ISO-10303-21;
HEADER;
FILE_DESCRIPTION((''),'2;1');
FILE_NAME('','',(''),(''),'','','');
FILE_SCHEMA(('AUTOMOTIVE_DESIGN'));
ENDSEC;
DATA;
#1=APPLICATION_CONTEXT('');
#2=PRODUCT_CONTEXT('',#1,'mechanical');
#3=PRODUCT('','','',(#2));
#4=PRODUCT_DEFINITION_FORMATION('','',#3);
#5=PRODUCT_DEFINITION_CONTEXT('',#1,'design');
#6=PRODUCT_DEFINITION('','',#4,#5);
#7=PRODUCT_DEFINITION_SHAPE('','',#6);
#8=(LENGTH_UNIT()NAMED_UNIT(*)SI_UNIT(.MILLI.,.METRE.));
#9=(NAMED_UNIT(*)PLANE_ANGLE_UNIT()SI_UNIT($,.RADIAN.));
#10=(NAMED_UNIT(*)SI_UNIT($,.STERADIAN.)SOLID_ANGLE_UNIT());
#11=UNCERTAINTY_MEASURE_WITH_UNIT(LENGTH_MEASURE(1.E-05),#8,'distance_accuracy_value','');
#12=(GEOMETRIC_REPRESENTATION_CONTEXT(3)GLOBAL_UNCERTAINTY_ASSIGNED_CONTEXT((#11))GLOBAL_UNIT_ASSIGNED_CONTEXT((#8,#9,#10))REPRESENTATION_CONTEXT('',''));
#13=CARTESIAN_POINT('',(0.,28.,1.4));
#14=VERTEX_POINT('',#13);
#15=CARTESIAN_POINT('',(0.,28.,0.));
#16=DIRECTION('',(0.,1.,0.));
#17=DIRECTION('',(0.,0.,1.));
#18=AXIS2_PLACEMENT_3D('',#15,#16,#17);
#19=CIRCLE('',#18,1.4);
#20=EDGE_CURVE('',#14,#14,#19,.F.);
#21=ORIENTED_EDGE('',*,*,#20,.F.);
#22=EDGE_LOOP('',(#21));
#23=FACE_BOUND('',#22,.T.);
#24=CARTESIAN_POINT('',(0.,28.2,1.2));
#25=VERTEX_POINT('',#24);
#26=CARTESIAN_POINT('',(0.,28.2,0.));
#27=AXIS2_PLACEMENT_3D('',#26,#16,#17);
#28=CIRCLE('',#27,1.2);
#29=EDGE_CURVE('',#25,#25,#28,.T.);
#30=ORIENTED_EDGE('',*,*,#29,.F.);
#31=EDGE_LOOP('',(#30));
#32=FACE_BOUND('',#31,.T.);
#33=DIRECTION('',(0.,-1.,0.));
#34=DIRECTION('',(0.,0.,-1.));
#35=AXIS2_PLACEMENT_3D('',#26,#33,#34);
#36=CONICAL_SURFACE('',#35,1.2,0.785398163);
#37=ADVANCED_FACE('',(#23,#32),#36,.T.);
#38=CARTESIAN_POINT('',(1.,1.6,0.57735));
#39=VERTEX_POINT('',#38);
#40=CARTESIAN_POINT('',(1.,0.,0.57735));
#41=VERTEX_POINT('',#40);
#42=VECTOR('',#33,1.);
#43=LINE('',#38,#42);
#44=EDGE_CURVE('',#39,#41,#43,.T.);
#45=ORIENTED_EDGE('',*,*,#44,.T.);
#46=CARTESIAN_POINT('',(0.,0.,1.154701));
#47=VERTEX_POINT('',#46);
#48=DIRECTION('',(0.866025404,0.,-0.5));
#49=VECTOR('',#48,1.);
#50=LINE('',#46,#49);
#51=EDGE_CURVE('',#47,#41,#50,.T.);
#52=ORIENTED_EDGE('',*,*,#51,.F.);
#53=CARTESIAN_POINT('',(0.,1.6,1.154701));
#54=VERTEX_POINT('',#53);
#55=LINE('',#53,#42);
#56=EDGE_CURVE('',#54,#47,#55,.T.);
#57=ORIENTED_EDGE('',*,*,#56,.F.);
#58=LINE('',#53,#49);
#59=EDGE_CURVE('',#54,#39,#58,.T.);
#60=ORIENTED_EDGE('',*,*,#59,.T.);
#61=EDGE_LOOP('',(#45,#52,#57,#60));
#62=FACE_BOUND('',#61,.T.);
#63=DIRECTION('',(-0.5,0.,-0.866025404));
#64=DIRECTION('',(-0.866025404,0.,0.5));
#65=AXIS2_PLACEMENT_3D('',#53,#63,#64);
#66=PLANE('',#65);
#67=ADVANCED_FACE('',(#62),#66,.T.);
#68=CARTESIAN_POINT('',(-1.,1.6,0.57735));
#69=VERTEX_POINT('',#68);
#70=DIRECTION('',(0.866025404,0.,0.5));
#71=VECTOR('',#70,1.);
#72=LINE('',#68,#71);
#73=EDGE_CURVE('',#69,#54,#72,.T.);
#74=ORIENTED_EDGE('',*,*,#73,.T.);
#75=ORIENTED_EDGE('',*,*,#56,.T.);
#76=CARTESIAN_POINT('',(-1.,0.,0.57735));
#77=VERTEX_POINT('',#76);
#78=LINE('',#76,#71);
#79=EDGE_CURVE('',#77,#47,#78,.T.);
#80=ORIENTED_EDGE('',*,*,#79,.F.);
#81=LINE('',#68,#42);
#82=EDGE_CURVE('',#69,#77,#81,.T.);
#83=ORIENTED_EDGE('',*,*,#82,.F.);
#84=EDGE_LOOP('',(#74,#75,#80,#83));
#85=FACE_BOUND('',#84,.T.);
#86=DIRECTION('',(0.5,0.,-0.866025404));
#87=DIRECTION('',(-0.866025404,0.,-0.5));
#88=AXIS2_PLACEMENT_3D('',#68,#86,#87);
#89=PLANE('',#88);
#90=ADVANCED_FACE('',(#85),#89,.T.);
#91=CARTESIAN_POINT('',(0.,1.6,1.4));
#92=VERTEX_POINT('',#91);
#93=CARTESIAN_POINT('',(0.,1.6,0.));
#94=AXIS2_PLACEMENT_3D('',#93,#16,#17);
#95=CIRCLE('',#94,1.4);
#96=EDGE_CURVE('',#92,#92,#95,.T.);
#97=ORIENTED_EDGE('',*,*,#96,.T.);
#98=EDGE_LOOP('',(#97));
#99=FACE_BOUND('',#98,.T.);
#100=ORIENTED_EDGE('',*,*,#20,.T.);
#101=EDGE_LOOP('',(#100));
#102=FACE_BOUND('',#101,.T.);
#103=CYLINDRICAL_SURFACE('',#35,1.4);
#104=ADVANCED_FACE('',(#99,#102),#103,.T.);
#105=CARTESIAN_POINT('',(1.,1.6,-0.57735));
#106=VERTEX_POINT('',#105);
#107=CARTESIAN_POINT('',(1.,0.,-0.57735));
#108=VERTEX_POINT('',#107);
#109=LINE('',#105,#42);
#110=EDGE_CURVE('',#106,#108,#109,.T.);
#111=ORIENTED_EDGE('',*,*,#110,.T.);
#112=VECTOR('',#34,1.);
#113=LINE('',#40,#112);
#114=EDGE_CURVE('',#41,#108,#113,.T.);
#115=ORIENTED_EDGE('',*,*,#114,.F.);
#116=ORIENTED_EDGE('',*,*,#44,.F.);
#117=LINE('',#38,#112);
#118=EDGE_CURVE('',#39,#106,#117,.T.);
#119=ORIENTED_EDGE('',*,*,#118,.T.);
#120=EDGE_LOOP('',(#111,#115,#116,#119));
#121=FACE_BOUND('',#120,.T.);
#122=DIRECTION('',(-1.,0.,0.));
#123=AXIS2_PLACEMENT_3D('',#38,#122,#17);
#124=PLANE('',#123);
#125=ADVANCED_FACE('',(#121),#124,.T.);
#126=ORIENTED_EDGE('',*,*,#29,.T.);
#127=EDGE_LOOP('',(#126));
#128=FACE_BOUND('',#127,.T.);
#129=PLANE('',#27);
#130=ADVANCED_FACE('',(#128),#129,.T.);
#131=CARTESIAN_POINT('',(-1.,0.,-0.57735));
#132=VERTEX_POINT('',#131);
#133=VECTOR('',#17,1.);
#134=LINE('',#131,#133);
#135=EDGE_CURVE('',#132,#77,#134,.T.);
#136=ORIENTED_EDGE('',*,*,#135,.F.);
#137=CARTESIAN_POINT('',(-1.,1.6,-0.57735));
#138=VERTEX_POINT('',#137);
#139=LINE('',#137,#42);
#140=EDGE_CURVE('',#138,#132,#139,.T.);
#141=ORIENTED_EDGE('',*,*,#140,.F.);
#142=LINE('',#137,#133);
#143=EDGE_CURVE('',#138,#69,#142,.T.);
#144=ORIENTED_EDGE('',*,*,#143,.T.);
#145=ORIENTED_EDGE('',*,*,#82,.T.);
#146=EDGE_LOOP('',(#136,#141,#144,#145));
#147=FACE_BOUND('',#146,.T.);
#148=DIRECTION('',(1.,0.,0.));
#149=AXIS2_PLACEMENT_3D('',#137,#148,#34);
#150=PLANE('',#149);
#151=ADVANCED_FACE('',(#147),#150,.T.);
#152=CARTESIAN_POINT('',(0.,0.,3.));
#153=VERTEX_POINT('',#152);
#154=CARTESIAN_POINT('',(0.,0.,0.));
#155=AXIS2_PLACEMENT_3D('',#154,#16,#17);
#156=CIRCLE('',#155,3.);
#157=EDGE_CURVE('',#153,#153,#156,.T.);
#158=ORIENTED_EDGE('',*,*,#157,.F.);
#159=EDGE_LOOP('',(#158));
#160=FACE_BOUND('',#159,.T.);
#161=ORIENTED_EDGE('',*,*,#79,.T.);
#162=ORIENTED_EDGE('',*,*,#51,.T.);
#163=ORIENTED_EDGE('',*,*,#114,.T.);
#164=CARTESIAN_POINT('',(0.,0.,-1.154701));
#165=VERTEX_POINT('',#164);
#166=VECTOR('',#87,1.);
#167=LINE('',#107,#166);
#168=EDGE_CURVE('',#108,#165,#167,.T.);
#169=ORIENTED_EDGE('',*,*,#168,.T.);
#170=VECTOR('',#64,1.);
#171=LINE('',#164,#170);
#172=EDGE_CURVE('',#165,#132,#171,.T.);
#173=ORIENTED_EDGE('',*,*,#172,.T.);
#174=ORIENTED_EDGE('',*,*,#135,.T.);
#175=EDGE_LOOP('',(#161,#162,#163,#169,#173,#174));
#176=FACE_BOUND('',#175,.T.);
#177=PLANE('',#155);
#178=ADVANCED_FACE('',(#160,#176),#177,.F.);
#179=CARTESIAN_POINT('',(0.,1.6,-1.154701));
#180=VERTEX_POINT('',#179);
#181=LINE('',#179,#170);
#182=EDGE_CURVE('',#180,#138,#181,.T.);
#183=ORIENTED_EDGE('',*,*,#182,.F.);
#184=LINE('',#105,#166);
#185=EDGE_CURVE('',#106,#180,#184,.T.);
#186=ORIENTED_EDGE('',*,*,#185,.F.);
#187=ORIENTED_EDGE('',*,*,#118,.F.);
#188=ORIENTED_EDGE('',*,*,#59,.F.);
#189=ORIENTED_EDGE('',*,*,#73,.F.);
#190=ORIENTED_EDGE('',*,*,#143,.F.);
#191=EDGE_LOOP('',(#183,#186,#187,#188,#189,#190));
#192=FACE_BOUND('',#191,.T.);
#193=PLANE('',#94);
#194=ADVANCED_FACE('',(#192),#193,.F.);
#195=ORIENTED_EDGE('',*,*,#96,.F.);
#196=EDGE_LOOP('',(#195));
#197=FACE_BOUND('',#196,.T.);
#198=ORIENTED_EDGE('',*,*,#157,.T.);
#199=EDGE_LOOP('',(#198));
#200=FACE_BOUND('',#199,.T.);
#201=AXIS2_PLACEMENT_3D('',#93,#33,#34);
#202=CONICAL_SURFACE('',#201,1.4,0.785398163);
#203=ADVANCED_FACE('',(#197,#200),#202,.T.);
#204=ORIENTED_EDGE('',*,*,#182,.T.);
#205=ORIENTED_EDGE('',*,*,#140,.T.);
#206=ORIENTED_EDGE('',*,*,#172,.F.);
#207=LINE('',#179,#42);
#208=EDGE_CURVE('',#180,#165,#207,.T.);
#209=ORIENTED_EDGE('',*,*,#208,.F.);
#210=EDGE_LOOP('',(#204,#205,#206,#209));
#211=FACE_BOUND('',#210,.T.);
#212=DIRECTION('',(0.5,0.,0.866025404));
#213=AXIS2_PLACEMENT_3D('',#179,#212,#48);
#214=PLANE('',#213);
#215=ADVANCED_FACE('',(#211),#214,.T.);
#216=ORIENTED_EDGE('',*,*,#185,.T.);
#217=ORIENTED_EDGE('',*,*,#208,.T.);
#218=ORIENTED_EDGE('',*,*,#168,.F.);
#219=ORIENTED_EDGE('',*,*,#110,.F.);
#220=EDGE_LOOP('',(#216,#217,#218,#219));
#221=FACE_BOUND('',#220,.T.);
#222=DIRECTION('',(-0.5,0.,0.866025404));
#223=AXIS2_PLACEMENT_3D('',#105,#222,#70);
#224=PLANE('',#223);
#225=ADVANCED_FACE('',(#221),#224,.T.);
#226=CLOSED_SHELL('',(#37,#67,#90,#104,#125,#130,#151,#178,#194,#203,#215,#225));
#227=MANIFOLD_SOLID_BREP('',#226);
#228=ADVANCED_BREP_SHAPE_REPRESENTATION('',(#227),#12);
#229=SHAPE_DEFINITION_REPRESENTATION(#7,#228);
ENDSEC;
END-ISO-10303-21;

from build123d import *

# Parameters (mm, degrees)
SKETCH_1_R      = 3
EXTRUDE_1_DEPTH = 1.6
CHAMFER_1_SIZE  = 1.6
SKETCH_2_R      = 1.4
EXTRUDE_2_DEPTH = 26.6
CHAMFER_2_SIZE  = 0.2


with BuildPart() as part:
    # 草图1 → 凸台-拉伸1 (new body)
    with BuildSketch(Plane(origin=(0, 0, 0), x_dir=(1, 0, 0), z_dir=(0, 1, 0))):
        with Locations(Location((0, 0, 0), (0, 0, 270))):
            Circle(SKETCH_1_R)
        Polygon((0, -1.154700538), (1, -0.577350269), (1, 0.577350269), (0, 1.154700538), (-1, 0.577350269), (-1, -0.577350269), align=None, mode=Mode.SUBTRACT)
    extrude(amount=EXTRUDE_1_DEPTH)

    # 倒角1
    # the kernel refuses this chamfer: 1.6 mm, written as the material it takes off along each edge
    with BuildSketch(Plane(origin=(0, 1.6, 0), x_dir=(0, 0, 1), z_dir=(-1, 0, 0))) as chamfer_1_piece_1:
        Polygon((3, -CHAMFER_1_SIZE), (3 - CHAMFER_1_SIZE, 0), (3, 0), align=None)
    revolve(axis=Axis((0, 1.6, 0), (0, 1, 0)), mode=Mode.SUBTRACT)

    # 草图2 → 凸台-拉伸2 (add)
    with BuildSketch(Plane(origin=(0, 1.6, 0), x_dir=(1, 0, 0), z_dir=(0, 1, 0))):
        with Locations(Location((0, 0, 0), (0, 0, 270))):
            Circle(SKETCH_2_R)
    extrude(amount=EXTRUDE_2_DEPTH)

    # 倒角2
    chamfer_2_edges = [part.edges().sort_by_distance(p)[0] for p in [
        (0, 28.2, -1.4),
    ]]
    chamfer(chamfer_2_edges, length=CHAMFER_2_SIZE)


solid = part.part
